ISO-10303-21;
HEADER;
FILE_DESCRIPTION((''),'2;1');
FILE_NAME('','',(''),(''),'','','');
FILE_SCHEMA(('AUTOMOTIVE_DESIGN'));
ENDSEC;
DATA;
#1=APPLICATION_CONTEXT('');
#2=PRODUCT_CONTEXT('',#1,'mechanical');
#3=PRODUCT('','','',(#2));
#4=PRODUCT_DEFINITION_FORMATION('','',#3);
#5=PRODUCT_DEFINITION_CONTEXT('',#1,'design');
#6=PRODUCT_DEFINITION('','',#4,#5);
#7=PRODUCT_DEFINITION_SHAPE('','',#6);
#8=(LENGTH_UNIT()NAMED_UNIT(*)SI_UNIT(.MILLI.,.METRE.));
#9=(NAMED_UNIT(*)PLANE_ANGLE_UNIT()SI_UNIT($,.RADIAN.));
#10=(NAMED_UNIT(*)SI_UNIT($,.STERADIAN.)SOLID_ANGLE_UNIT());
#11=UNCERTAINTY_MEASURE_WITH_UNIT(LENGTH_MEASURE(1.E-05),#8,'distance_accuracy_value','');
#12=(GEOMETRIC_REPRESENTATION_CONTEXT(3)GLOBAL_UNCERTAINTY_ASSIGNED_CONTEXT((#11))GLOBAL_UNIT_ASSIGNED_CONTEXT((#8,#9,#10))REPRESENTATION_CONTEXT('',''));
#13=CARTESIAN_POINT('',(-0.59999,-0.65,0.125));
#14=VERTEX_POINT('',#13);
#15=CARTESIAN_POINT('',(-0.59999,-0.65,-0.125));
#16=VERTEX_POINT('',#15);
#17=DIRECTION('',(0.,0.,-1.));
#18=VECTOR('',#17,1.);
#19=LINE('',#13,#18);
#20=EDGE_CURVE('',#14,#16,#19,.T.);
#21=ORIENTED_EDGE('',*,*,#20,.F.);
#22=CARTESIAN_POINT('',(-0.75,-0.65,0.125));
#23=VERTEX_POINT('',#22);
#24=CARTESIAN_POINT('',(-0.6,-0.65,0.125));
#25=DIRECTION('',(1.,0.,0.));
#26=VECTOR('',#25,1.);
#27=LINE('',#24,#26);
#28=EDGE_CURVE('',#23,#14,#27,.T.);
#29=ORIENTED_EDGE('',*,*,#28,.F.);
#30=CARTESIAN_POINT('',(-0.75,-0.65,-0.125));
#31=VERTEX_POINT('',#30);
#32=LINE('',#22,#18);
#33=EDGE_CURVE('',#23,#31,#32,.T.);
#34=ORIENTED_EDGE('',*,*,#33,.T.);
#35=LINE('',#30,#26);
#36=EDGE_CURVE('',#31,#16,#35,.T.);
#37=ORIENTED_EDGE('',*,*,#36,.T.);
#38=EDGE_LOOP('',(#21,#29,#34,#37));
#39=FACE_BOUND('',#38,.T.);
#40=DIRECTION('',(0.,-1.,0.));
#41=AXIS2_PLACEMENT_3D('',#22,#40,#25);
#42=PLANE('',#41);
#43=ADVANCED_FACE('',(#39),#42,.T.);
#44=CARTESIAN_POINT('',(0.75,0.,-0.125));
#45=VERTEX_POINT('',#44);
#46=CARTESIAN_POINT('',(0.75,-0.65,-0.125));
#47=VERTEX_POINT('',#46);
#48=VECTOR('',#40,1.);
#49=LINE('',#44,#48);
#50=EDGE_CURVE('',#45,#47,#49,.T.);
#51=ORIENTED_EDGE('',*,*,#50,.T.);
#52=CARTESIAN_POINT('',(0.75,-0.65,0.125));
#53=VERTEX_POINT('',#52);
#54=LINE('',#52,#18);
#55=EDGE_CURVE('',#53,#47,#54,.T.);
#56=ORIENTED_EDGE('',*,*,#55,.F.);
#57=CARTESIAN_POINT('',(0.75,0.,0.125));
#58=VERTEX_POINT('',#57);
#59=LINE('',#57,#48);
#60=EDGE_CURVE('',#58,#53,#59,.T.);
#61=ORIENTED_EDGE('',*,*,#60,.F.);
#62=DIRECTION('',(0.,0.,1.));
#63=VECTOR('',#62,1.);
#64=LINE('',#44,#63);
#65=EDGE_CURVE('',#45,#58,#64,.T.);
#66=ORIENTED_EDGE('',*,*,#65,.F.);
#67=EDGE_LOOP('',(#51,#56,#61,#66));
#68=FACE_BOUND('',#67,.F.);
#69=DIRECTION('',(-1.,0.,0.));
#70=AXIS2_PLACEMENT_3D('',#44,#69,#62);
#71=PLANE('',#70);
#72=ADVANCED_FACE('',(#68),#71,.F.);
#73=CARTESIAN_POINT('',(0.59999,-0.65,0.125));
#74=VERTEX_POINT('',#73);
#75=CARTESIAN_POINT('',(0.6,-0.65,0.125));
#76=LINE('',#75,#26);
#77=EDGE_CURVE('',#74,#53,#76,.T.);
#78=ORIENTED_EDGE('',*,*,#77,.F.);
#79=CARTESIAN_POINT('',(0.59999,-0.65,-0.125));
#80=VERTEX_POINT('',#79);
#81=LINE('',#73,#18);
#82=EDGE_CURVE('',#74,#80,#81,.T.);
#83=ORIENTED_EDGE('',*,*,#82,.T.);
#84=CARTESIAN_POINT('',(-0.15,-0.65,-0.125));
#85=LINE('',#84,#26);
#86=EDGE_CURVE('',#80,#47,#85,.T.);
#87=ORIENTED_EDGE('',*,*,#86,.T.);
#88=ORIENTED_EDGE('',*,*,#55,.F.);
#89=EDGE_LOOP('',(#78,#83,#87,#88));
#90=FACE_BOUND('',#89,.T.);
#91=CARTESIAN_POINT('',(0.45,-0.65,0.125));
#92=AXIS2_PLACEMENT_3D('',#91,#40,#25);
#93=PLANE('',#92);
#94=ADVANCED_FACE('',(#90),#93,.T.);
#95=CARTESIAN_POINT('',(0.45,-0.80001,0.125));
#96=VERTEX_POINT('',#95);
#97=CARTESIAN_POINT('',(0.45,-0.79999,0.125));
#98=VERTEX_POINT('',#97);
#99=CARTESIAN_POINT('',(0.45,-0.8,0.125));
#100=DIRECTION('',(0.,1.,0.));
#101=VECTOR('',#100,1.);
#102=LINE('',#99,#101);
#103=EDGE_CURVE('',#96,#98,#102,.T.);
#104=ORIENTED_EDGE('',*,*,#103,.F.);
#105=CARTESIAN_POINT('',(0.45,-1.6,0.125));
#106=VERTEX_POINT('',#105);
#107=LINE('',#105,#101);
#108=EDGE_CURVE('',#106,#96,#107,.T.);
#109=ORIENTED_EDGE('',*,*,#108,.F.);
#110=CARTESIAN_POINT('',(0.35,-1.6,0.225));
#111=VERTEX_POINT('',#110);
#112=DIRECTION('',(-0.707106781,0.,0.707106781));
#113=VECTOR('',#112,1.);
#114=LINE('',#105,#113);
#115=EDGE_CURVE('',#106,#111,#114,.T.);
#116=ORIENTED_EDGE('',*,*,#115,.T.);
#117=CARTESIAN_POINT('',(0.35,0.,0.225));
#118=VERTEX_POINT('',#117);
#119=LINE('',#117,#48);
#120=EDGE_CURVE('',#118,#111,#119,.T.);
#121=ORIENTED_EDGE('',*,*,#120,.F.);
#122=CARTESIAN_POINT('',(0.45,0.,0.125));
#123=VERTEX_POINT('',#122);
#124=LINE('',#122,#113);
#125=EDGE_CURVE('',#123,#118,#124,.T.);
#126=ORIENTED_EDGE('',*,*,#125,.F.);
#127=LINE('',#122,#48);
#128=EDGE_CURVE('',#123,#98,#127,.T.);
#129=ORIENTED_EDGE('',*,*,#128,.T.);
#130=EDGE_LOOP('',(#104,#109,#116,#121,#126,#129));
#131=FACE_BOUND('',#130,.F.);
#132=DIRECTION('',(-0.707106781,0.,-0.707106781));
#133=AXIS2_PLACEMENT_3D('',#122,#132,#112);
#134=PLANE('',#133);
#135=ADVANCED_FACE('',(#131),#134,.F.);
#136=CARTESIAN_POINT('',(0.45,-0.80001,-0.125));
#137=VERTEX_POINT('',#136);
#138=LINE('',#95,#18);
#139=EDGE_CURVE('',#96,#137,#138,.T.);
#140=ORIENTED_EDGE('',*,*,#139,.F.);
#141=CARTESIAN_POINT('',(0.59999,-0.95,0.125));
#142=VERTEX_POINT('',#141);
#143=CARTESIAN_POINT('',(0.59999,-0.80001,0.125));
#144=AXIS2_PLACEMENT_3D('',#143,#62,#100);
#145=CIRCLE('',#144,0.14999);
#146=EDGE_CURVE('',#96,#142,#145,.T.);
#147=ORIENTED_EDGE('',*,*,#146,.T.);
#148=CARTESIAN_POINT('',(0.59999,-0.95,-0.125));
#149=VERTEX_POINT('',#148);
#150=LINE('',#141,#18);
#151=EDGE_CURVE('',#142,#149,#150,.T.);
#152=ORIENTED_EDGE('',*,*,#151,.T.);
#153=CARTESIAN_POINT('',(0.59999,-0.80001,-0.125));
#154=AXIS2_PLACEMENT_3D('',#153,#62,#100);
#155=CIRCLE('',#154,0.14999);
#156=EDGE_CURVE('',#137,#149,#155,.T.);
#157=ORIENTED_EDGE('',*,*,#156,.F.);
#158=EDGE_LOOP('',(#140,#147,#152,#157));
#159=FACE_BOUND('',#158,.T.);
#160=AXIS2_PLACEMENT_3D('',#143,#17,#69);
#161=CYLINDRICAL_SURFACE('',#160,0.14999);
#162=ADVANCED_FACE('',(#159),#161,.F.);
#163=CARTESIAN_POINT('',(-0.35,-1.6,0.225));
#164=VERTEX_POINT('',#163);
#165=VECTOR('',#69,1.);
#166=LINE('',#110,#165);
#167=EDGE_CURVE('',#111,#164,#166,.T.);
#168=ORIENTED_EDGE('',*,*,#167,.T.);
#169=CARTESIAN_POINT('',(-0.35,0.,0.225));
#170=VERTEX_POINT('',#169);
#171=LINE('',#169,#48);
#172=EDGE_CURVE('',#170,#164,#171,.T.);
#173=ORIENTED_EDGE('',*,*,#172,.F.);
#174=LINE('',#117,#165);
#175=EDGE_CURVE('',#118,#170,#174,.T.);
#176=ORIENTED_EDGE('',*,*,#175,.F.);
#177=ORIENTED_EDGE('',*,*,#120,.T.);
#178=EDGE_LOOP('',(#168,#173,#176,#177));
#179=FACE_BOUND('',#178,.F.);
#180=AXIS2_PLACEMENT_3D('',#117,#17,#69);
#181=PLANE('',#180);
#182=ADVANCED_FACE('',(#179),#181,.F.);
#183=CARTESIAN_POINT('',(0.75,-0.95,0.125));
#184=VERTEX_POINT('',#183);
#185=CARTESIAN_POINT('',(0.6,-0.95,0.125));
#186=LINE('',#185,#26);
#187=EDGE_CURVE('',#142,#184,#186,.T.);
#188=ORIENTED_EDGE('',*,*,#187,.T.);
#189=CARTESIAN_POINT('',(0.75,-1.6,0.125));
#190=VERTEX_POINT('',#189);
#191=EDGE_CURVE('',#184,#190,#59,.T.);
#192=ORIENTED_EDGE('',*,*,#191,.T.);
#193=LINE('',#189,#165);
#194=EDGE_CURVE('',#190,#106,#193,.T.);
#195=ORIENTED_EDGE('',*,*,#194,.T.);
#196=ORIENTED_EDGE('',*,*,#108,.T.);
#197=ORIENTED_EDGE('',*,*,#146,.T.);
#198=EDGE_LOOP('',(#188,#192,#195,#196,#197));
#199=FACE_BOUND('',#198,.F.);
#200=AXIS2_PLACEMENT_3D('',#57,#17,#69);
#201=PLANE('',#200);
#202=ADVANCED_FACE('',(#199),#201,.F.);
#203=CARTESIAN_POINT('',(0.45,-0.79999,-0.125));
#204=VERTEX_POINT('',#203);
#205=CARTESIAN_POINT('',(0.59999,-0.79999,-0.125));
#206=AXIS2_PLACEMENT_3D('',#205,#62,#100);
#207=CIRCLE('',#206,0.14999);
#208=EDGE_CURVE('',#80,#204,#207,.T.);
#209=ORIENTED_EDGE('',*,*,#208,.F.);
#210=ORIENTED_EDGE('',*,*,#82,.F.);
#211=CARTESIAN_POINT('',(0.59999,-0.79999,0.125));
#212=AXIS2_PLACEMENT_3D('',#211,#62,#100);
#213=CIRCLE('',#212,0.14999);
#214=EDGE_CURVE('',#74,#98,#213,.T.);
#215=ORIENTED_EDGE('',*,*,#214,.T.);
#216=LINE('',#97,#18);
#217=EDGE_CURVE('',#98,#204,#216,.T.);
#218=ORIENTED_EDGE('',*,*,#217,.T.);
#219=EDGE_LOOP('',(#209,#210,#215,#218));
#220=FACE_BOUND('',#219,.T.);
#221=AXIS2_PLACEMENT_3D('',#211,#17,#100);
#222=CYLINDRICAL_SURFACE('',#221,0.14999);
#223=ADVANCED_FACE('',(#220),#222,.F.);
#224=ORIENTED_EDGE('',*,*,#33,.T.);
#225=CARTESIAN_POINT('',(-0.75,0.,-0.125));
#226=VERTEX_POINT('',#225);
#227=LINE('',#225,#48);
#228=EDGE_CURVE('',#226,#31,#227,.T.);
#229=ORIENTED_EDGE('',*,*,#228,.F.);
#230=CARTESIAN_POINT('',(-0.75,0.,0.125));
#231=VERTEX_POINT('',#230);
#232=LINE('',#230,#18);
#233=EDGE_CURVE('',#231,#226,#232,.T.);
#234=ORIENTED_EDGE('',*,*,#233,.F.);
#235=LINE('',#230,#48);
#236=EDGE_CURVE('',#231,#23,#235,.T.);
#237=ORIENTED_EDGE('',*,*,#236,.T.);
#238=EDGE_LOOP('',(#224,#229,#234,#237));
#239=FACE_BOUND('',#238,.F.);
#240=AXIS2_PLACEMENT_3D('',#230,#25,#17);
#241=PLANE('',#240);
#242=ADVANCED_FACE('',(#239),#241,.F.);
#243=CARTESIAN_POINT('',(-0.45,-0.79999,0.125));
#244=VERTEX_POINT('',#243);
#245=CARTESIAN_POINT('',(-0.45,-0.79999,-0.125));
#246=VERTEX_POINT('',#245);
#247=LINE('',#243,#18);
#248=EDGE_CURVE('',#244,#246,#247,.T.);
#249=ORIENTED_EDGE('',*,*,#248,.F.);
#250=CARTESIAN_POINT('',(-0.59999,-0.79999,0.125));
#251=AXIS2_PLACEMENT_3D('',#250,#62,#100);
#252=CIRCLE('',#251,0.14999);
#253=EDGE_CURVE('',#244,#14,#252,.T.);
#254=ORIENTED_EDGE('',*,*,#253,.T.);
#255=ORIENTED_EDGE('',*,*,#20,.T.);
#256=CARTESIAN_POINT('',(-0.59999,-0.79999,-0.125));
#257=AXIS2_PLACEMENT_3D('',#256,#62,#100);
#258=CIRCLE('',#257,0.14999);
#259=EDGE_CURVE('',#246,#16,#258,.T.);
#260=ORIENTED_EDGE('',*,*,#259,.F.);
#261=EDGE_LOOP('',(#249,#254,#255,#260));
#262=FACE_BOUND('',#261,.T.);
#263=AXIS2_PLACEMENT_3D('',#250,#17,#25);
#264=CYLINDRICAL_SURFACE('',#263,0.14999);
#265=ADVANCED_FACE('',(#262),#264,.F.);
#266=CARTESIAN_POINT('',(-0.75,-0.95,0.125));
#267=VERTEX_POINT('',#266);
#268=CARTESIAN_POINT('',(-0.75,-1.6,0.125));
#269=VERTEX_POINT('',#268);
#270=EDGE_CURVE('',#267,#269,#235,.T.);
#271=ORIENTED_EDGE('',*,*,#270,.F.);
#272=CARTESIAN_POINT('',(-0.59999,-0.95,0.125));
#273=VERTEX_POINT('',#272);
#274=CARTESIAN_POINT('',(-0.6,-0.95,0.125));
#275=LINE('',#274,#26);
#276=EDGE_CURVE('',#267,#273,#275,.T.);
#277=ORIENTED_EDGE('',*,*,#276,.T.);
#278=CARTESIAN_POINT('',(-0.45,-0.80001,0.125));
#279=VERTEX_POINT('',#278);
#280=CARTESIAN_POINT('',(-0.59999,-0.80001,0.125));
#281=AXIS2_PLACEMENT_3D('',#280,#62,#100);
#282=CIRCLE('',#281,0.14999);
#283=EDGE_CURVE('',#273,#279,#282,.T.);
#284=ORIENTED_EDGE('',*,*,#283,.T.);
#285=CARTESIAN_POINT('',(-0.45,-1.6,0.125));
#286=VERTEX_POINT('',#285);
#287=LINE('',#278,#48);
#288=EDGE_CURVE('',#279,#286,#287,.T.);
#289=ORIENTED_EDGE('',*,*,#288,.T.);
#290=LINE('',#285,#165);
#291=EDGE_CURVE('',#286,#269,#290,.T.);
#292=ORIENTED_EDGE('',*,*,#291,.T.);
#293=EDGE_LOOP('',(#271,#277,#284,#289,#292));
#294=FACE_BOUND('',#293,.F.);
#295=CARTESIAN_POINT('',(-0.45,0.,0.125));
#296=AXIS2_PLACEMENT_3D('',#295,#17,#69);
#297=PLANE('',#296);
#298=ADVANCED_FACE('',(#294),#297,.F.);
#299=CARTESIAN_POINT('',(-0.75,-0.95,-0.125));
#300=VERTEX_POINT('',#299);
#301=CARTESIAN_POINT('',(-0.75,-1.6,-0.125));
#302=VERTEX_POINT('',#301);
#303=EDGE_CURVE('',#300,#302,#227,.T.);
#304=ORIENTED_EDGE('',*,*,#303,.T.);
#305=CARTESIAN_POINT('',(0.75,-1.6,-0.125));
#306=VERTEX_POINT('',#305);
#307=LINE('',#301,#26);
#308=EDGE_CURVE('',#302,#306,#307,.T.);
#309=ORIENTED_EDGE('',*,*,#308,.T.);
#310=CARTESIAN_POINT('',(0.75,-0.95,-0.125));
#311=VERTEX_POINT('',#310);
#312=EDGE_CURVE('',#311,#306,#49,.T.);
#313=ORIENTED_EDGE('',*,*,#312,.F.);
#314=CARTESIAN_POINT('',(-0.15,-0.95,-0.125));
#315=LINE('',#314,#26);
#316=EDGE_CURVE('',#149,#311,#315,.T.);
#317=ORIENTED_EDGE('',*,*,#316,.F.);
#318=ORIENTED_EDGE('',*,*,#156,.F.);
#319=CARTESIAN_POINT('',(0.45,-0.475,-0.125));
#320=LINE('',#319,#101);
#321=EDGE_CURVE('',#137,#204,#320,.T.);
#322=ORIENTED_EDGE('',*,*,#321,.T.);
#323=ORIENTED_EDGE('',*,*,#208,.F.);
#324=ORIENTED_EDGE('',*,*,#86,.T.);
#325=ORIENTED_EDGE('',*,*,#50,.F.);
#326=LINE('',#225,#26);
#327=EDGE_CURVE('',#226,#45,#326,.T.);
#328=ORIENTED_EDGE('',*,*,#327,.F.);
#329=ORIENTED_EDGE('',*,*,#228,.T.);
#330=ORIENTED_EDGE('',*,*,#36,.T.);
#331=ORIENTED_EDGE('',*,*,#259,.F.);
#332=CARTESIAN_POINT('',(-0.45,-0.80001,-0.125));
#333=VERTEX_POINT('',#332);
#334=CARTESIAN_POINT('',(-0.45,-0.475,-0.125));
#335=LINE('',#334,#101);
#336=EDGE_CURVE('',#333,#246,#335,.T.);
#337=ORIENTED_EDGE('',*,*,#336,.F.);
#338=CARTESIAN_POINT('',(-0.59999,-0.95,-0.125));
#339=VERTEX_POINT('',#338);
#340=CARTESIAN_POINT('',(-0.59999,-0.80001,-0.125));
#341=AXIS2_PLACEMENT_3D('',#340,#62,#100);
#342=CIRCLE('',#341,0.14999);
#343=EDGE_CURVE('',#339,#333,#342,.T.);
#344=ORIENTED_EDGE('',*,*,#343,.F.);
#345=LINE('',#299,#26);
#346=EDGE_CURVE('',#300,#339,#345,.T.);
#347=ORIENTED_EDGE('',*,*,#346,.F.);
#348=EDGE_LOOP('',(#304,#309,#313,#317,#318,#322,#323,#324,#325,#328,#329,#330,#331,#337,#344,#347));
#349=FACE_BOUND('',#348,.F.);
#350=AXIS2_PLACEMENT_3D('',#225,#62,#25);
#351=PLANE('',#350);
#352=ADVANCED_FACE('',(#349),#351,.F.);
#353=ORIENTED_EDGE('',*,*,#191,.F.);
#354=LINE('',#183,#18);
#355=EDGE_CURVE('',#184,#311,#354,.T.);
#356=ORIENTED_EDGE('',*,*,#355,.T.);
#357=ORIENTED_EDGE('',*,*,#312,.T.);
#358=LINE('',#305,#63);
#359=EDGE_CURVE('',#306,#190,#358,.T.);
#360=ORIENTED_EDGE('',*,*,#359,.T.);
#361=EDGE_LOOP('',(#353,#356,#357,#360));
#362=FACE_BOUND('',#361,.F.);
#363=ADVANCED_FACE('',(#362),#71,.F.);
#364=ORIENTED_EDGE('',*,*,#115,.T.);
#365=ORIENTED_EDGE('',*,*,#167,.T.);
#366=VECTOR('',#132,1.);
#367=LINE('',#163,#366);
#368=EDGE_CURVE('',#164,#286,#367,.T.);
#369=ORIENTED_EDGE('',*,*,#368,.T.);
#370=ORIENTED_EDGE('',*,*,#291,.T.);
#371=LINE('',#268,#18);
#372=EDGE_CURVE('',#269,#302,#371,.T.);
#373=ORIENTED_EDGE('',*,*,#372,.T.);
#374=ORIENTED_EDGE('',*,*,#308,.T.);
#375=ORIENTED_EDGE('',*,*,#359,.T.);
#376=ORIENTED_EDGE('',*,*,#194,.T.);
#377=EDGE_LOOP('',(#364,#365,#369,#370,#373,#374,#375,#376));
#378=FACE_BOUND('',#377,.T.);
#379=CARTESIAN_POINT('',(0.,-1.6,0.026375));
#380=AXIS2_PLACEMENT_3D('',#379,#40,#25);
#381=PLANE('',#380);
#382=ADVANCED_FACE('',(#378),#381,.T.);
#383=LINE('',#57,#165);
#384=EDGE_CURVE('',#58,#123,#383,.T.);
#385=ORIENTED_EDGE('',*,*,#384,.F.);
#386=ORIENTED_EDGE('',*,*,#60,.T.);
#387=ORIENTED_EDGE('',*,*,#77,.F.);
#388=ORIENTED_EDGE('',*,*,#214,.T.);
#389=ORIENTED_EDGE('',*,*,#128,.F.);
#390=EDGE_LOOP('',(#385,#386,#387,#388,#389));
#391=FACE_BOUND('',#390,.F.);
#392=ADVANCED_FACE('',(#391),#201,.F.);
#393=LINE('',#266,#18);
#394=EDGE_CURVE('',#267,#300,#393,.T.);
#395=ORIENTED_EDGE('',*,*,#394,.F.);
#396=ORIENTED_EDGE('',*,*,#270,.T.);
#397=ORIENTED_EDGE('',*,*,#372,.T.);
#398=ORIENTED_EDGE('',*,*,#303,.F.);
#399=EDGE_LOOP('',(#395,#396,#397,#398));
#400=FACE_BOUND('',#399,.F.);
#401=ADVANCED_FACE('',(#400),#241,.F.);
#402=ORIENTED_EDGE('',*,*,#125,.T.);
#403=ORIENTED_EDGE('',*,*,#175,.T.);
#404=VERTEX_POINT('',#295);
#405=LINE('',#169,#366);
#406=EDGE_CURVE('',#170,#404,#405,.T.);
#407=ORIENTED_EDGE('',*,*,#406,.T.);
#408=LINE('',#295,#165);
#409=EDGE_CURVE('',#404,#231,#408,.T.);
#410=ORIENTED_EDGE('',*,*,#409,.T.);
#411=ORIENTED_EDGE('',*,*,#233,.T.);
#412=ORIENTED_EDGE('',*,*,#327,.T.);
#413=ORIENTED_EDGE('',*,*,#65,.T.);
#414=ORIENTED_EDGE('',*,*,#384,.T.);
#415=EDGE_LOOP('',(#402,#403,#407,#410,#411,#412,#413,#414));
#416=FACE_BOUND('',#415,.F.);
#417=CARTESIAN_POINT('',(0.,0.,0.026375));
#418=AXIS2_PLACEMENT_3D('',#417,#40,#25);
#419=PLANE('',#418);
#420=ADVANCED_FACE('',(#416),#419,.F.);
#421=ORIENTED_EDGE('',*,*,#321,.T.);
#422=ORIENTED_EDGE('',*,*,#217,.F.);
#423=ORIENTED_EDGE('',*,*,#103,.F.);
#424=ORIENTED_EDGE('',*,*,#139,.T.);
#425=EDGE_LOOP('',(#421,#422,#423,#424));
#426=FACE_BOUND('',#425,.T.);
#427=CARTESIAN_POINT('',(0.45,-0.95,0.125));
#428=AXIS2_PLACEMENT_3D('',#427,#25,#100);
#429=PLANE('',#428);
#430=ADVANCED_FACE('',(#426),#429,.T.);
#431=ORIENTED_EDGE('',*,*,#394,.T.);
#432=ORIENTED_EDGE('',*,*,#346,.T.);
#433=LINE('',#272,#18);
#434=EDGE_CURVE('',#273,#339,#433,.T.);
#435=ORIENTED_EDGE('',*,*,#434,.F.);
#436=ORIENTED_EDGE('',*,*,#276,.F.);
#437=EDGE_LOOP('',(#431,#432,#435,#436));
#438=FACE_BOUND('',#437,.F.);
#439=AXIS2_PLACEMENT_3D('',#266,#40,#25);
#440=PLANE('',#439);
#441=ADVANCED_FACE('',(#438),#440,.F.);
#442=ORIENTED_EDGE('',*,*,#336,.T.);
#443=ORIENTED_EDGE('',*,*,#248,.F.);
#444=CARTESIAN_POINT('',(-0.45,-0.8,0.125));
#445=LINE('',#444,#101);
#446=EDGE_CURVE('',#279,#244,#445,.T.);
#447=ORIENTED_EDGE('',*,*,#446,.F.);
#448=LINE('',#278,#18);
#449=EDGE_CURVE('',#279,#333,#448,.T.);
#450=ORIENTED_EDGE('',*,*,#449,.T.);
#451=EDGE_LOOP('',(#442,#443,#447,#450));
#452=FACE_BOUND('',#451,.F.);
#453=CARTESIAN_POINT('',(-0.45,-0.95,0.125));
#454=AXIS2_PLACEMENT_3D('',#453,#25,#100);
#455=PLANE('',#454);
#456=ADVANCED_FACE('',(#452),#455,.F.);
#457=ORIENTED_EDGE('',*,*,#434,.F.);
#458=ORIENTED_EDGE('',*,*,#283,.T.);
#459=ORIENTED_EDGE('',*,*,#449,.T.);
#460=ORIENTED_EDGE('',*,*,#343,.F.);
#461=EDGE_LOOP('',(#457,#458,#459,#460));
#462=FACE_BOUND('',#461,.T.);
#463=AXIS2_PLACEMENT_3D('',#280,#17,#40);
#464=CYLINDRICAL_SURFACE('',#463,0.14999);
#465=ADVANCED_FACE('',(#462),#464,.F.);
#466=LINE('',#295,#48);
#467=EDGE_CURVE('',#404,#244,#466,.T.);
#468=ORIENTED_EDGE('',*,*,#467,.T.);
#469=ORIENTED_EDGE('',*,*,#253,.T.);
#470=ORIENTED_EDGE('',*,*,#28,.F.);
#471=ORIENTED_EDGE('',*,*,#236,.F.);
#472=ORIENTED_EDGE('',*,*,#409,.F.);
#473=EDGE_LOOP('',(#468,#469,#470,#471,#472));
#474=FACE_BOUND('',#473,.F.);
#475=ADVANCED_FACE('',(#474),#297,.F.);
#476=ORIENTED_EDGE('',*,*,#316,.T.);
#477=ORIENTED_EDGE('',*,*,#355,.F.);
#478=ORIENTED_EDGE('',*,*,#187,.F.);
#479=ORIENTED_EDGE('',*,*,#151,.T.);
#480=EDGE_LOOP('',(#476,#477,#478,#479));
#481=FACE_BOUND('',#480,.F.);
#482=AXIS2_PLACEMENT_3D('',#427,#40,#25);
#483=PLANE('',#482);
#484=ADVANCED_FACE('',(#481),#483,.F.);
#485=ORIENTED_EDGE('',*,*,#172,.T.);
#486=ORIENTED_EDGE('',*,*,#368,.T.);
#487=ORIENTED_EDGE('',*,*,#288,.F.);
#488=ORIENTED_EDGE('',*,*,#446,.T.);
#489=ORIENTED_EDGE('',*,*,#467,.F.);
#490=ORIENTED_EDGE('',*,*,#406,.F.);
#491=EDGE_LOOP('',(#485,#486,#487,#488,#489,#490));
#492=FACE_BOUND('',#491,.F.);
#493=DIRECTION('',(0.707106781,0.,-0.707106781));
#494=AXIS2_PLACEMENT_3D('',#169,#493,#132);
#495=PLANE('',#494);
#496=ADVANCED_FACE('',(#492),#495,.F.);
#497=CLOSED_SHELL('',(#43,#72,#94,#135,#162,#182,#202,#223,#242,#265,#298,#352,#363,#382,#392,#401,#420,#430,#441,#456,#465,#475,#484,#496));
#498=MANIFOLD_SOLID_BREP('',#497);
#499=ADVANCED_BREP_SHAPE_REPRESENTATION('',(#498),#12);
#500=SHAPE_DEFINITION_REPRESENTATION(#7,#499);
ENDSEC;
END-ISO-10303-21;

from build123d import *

# Parameters (mm, degrees)
F1_DEPTH = 1.6
F2_W     = 0.3
F2_H     = 0.3
F3_DEPTH = 0.3
F4_W     = 0.3
F4_H     = 0.3
F5_DEPTH = 0.3
F6_R     = 0.14999


# Not quite as in the source:
# - a fillet or chamfer is up to 0.001 mm smaller than in the source, because OpenCascade refuses the exact size


with BuildPart() as f1:
    # F0 (on Front) → F1 (new body)
    with BuildSketch(Plane.XZ):
        Polygon((0.75, -0.125), (0.75, 0.125), (0.45, 0.125), (0.35, 0.225), (-0.35, 0.225), (-0.45, 0.125), (-0.75, 0.125), (-0.75, -0.125), align=None)
    extrude(amount=F1_DEPTH)

    # F2 (on face) → F3 (cut)
    with BuildSketch(Plane.XY.offset(0.125)):
        with Locations((-0.6, -0.8)):
            Rectangle(F2_W, F2_H)
    extrude(amount=-F3_DEPTH, mode=Mode.SUBTRACT)

    # F4 (on face) → F5 (cut)
    with BuildSketch(Plane.XY.offset(0.125)):
        with Locations((0.6, -0.8)):
            Rectangle(F4_W, F4_H)
    extrude(amount=-F5_DEPTH, mode=Mode.SUBTRACT)

    # F6 (radius 0.15 in the source; OpenCascade refuses exactly that, so slightly less here)
    f6_edges = [f1.edges().sort_by_distance(p)[0] for p in [
        (0.45, -0.65, 0),
        (-0.45, -0.65, 0),
        (-0.45, -0.95, 0),
        (0.45, -0.95, 0),
    ]]
    fillet(f6_edges, radius=F6_R)


solid = f1.part
